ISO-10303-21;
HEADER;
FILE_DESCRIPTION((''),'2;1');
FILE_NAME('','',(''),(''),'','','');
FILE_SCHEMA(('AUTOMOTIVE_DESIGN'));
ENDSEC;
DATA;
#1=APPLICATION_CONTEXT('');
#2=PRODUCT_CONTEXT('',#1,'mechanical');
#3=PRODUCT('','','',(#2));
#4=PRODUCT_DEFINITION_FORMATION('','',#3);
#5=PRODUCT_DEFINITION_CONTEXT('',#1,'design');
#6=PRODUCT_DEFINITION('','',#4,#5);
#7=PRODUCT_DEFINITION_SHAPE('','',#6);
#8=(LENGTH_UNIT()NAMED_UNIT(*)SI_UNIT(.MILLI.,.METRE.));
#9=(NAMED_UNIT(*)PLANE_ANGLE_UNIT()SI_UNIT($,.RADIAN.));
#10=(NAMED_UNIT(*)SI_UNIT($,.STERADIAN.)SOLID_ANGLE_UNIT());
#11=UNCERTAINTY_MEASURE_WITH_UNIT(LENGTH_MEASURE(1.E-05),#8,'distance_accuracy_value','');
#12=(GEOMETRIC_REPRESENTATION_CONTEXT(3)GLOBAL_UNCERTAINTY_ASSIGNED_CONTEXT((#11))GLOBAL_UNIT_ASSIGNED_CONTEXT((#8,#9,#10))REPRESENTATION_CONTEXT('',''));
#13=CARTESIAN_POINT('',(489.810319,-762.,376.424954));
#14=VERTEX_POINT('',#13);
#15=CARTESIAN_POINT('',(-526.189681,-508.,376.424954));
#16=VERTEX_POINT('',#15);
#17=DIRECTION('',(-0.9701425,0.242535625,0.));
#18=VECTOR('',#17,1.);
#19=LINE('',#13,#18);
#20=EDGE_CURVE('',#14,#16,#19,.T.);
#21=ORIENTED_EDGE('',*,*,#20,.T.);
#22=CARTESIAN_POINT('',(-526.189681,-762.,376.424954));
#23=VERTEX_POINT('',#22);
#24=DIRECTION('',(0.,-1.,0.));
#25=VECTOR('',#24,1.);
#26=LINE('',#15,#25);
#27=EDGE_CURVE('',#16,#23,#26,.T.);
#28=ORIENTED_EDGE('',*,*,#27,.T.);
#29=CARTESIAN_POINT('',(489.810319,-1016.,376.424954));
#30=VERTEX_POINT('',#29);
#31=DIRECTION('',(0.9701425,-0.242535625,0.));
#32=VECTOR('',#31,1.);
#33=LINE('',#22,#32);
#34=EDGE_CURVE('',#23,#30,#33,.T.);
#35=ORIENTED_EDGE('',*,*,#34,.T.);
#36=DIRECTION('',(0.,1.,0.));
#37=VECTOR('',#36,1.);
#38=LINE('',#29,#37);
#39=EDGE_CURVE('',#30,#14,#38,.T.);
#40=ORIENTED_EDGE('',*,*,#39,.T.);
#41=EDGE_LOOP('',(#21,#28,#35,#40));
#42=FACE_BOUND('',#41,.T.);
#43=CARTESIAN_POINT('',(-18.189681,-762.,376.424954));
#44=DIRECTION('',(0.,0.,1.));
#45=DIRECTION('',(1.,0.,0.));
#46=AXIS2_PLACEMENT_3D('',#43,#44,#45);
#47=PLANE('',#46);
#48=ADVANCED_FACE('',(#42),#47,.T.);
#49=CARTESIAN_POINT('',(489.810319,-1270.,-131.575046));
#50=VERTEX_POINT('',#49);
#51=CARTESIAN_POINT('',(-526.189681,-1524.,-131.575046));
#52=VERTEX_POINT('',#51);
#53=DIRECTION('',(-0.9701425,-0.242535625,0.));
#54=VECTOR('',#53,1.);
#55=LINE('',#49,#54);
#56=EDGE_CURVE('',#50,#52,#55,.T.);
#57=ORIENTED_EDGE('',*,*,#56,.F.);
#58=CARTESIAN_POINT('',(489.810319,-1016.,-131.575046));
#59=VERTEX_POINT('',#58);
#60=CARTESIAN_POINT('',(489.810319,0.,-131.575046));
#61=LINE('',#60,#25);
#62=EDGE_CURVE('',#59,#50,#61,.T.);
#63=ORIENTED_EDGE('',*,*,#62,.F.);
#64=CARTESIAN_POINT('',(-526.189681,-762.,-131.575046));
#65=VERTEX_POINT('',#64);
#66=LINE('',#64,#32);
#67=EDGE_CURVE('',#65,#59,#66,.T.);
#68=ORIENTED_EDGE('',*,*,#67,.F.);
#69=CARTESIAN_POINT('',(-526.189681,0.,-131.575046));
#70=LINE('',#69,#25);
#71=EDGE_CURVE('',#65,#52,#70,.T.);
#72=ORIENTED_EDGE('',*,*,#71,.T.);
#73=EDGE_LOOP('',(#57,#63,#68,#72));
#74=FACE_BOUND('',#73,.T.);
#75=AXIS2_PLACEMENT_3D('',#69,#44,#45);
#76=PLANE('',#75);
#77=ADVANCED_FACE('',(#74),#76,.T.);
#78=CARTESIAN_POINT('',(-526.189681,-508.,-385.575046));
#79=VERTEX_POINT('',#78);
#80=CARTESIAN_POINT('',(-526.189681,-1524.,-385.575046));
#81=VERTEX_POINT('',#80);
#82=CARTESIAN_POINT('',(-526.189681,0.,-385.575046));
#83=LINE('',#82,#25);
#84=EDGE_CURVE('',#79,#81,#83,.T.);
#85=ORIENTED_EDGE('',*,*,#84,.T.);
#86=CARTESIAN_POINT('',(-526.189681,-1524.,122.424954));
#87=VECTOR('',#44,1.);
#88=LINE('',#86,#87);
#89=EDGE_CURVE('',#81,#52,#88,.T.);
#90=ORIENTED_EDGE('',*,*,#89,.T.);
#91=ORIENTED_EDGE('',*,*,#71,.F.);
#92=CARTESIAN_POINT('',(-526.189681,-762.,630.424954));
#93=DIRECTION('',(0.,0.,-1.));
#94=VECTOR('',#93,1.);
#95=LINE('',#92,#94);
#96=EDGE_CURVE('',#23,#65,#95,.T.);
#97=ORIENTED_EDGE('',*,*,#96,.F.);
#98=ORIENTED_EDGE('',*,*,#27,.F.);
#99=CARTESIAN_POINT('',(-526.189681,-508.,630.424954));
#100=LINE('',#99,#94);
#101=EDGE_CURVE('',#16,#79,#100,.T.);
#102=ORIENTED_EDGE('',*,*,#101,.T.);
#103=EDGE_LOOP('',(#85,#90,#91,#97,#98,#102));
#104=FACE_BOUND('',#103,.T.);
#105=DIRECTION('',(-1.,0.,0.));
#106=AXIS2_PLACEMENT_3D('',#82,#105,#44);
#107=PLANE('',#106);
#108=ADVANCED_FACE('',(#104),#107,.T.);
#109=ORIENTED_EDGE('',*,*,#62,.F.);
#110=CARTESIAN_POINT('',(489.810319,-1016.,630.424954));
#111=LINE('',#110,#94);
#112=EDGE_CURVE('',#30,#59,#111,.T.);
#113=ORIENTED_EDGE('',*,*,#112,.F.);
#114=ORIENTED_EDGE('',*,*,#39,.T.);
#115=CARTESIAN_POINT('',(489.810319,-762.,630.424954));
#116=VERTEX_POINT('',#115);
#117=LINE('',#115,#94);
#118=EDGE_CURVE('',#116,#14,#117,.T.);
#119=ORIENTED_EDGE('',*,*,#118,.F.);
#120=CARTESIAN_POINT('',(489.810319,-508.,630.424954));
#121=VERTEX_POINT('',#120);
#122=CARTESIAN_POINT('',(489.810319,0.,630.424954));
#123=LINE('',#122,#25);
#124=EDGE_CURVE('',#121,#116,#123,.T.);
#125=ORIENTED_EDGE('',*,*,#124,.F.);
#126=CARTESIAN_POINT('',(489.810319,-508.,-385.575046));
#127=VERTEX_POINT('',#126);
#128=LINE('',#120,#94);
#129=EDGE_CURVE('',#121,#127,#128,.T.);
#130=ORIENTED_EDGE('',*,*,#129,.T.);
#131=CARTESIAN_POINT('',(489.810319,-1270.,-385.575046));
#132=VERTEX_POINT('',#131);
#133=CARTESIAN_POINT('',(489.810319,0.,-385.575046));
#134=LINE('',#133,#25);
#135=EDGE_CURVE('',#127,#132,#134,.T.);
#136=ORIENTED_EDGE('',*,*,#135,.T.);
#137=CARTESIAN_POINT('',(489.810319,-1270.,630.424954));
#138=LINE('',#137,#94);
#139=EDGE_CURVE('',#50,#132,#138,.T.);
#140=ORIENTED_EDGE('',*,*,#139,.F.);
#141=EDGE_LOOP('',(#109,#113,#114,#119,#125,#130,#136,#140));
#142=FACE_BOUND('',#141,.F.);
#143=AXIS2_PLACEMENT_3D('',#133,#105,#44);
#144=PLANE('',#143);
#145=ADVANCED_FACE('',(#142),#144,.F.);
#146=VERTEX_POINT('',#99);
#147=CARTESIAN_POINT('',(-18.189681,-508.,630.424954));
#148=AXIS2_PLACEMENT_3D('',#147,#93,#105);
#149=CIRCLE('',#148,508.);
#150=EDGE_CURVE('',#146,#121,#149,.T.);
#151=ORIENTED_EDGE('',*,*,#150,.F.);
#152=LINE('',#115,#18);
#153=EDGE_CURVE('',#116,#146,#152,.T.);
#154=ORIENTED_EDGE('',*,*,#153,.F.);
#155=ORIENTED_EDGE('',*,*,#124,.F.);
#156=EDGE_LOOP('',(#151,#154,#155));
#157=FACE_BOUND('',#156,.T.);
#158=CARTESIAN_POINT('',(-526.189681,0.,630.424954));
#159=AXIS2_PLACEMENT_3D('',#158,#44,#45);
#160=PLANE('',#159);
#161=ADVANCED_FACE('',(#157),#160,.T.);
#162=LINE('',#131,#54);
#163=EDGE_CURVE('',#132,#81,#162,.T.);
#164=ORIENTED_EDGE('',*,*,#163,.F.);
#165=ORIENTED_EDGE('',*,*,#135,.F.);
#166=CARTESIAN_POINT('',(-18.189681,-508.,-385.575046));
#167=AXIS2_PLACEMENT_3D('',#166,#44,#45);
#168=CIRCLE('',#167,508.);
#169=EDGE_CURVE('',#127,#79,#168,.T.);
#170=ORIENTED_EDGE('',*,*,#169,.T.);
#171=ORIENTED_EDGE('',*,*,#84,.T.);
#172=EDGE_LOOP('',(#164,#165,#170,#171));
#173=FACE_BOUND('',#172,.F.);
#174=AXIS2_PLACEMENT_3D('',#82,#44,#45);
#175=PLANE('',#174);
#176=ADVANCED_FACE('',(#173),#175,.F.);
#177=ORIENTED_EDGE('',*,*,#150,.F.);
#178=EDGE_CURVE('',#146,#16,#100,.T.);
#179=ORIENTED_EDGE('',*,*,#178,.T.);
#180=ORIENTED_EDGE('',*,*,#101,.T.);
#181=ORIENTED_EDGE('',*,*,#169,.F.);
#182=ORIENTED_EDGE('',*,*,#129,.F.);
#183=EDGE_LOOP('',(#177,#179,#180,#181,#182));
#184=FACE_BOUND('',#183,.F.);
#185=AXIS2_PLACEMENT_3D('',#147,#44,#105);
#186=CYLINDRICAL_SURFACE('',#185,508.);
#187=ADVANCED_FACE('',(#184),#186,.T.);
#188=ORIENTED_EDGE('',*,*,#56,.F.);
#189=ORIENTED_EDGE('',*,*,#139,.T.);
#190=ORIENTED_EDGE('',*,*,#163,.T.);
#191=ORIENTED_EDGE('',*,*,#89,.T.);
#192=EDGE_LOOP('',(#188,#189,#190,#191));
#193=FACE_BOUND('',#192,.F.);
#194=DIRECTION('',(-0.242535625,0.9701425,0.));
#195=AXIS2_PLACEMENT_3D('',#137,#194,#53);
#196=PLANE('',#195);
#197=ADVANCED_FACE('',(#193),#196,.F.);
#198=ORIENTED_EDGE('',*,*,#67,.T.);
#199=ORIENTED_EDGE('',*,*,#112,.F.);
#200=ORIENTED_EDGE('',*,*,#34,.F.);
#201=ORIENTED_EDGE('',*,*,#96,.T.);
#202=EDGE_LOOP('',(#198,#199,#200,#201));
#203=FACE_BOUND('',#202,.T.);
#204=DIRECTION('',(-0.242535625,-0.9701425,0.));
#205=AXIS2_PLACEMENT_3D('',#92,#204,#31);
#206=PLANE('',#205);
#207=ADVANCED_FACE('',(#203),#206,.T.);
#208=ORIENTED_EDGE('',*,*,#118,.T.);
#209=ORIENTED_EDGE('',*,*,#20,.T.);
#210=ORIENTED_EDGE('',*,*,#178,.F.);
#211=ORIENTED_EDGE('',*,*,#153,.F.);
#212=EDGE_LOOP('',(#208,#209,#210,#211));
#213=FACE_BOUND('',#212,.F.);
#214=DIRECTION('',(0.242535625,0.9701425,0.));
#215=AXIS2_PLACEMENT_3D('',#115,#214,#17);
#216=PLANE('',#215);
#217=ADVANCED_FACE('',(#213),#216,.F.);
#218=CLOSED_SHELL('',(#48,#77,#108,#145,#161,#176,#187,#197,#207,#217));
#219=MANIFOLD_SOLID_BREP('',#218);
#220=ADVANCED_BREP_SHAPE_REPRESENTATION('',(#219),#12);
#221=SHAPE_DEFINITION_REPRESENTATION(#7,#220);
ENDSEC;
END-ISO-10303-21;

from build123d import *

# Parameters (mm, degrees)
F0_W     = 1016
F0_H     = 1016
F1_DEPTH = 1524
F3_DEPTH = 1016
F5_DEPTH = 254
F7_DEPTH = 1016
F8_DEPTH = 762


with BuildPart() as f1:
    # F0 (on Front) → F1 (new body)
    with BuildSketch(Plane.XZ):
        with Locations((-18.1896807626, 122.4249541569)):
            Rectangle(F0_W, F0_H)
    extrude(amount=F1_DEPTH)

    # F2 (on face) → F3 (cut)
    with BuildSketch(Plane.XY.offset(630.4249541569)):
        with BuildLine():
            Line((-18.1896807626, 0), (-526.1896807626, 0))
            Line((-526.1896807626, 0), (-526.1896807626, -508))
            ThreePointArc((-526.1896807626, -508), (-377.3999256054, -148.7897551572), (-18.1896807626, 0))
        make_face()
        with BuildLine():
            Line((489.8103192374, 0), (-18.1896807626, 0))
            ThreePointArc((-18.1896807626, 0), (341.0205640802, -148.7897551572), (489.8103192374, -508))
            Line((489.8103192374, -508), (489.8103192374, 0))
        make_face()
    extrude(amount=-F3_DEPTH, mode=Mode.SUBTRACT)

    # F4 (on face) → F5 (cut)
    with BuildSketch(Plane.XY.offset(630.4249541569)):
        Polygon((489.8103192374, -1016), (489.8103192374, -762), (-526.1896807626, -508), (-526.1896807626, -762), align=None)
    extrude(amount=-F5_DEPTH, mode=Mode.SUBTRACT)

    # F6 (on face) → F7 (cut)
    with BuildSketch(Plane.XY.offset(630.4249541569)):
        Polygon((489.8103192374, -1524), (489.8103192374, -1270), (-526.1896807626, -1524), align=None)
    extrude(amount=-F7_DEPTH, mode=Mode.SUBTRACT)

    # F8 (cut): a face of the model
    f8_faces = [f1.faces().sort_by_distance(p)[0] for p in [
        (-102.8563474293, -1143, 630.4249541569),
    ]]
    extrude(f8_faces, amount=-F8_DEPTH, mode=Mode.SUBTRACT)


solid = f1.part
